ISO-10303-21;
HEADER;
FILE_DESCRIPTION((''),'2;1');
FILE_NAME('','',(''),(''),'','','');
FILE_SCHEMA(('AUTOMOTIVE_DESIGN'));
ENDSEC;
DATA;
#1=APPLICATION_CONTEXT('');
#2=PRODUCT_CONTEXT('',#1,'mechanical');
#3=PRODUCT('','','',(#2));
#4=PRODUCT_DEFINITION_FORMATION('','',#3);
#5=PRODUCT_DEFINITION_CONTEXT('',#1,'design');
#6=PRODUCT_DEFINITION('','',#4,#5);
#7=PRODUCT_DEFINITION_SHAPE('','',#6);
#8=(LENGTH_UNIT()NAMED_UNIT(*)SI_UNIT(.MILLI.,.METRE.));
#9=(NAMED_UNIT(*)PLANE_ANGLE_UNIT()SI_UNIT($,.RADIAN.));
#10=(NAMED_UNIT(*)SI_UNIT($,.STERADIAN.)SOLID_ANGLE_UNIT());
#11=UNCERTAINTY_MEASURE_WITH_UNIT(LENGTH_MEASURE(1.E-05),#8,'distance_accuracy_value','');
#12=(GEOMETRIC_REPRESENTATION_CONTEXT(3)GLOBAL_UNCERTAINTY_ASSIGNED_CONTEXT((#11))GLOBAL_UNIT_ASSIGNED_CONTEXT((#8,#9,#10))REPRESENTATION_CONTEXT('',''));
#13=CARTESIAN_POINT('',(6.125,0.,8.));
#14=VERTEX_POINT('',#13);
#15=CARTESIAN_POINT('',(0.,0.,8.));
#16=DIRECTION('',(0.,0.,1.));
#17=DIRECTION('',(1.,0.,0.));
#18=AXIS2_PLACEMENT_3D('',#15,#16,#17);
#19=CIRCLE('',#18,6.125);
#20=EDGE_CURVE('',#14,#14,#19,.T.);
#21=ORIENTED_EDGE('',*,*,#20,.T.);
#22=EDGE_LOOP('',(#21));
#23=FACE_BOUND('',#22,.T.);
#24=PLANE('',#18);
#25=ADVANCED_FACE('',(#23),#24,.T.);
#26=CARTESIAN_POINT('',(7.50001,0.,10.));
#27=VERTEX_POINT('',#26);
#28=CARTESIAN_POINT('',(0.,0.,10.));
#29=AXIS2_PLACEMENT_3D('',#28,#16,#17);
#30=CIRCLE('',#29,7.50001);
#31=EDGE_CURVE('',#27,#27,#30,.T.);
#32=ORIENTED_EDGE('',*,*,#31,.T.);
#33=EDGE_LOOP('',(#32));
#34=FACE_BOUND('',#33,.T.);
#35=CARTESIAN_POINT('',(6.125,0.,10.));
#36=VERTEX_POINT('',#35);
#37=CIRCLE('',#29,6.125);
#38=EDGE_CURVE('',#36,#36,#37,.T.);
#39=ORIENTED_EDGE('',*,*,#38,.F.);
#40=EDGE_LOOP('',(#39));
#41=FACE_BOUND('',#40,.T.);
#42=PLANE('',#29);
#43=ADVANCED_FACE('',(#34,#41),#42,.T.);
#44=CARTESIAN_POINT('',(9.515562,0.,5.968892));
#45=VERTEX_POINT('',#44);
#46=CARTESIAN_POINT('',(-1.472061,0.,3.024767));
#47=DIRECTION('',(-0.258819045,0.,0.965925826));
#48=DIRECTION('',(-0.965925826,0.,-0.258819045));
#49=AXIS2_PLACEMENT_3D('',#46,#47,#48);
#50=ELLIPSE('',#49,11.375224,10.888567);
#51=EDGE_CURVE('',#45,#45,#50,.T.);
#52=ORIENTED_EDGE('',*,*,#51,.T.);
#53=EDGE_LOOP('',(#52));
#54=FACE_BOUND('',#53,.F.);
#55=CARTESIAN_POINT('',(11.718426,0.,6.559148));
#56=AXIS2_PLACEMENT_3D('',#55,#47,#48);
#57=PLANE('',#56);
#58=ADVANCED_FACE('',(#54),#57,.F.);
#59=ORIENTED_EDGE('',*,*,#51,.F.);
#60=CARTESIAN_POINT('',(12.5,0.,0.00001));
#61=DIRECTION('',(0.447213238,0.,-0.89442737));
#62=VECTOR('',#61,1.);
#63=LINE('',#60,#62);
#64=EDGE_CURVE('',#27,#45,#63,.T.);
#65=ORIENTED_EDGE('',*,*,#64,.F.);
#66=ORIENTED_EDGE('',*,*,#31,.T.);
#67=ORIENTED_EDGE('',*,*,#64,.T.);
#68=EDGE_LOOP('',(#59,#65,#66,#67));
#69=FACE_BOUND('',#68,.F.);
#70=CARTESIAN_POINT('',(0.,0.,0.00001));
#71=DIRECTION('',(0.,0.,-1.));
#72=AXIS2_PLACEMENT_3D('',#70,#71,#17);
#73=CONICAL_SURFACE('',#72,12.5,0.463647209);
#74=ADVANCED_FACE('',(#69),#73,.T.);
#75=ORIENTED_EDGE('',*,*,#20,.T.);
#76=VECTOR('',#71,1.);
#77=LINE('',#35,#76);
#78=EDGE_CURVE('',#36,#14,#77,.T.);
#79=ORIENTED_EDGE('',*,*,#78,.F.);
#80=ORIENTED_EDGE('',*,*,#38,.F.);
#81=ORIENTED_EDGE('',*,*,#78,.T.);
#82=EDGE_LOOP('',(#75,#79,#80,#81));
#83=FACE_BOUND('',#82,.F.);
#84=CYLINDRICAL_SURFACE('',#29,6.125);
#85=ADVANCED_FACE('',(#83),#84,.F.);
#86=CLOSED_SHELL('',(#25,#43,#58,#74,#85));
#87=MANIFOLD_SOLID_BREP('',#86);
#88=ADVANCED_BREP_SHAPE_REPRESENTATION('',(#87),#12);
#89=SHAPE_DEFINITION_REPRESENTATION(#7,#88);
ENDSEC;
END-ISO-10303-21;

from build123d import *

# Parameters (mm, degrees)
F0_R     = 12.5
F1_DEPTH = 10
F2_SIZE2 = 9.99999
F2_SIZE  = 4.99999
F4_DEPTH = 12.5
F5_R     = 6.125
F6_DEPTH = 2


# Not quite as in the source:
# - a fillet or chamfer is up to 0.001 mm smaller than in the source, because OpenCascade refuses the exact size


with BuildPart() as f1:
    # F0 (on Top) → F1 (new body)
    with BuildSketch(Plane.XY):
        Circle(F0_R)
    extrude(amount=F1_DEPTH)

    # F2 (size 5 and 10 in the source; OpenCascade refuses exactly that, so slightly less here)
    f2_edges = [f1.edges().sort_by_distance(p)[0] for p in [
        (-12.5, 0, 10),
    ]]
    f2_side = f1.faces().sort_by_distance((0, 0, 10))[0]
    chamfer(f2_edges, length=F2_SIZE, length2=F2_SIZE2, reference=f2_side)

    # F3 (on Front) → F4 (cut, symmetric)
    with BuildSketch(Plane.XZ):
        Polygon((11.7184263772, 6.5591478468), (-12.7606466413, 0), (-7.277042605, -3.8485343102), (16.1768086255, -2.4198731408), align=None)
    extrude(amount=F4_DEPTH, both=True, mode=Mode.SUBTRACT)

    # F5 (on face) → F6 (cut)
    with BuildSketch(Plane.XY.offset(10)):
        Circle(F5_R)
    extrude(amount=-F6_DEPTH, mode=Mode.SUBTRACT)


solid = f1.part
